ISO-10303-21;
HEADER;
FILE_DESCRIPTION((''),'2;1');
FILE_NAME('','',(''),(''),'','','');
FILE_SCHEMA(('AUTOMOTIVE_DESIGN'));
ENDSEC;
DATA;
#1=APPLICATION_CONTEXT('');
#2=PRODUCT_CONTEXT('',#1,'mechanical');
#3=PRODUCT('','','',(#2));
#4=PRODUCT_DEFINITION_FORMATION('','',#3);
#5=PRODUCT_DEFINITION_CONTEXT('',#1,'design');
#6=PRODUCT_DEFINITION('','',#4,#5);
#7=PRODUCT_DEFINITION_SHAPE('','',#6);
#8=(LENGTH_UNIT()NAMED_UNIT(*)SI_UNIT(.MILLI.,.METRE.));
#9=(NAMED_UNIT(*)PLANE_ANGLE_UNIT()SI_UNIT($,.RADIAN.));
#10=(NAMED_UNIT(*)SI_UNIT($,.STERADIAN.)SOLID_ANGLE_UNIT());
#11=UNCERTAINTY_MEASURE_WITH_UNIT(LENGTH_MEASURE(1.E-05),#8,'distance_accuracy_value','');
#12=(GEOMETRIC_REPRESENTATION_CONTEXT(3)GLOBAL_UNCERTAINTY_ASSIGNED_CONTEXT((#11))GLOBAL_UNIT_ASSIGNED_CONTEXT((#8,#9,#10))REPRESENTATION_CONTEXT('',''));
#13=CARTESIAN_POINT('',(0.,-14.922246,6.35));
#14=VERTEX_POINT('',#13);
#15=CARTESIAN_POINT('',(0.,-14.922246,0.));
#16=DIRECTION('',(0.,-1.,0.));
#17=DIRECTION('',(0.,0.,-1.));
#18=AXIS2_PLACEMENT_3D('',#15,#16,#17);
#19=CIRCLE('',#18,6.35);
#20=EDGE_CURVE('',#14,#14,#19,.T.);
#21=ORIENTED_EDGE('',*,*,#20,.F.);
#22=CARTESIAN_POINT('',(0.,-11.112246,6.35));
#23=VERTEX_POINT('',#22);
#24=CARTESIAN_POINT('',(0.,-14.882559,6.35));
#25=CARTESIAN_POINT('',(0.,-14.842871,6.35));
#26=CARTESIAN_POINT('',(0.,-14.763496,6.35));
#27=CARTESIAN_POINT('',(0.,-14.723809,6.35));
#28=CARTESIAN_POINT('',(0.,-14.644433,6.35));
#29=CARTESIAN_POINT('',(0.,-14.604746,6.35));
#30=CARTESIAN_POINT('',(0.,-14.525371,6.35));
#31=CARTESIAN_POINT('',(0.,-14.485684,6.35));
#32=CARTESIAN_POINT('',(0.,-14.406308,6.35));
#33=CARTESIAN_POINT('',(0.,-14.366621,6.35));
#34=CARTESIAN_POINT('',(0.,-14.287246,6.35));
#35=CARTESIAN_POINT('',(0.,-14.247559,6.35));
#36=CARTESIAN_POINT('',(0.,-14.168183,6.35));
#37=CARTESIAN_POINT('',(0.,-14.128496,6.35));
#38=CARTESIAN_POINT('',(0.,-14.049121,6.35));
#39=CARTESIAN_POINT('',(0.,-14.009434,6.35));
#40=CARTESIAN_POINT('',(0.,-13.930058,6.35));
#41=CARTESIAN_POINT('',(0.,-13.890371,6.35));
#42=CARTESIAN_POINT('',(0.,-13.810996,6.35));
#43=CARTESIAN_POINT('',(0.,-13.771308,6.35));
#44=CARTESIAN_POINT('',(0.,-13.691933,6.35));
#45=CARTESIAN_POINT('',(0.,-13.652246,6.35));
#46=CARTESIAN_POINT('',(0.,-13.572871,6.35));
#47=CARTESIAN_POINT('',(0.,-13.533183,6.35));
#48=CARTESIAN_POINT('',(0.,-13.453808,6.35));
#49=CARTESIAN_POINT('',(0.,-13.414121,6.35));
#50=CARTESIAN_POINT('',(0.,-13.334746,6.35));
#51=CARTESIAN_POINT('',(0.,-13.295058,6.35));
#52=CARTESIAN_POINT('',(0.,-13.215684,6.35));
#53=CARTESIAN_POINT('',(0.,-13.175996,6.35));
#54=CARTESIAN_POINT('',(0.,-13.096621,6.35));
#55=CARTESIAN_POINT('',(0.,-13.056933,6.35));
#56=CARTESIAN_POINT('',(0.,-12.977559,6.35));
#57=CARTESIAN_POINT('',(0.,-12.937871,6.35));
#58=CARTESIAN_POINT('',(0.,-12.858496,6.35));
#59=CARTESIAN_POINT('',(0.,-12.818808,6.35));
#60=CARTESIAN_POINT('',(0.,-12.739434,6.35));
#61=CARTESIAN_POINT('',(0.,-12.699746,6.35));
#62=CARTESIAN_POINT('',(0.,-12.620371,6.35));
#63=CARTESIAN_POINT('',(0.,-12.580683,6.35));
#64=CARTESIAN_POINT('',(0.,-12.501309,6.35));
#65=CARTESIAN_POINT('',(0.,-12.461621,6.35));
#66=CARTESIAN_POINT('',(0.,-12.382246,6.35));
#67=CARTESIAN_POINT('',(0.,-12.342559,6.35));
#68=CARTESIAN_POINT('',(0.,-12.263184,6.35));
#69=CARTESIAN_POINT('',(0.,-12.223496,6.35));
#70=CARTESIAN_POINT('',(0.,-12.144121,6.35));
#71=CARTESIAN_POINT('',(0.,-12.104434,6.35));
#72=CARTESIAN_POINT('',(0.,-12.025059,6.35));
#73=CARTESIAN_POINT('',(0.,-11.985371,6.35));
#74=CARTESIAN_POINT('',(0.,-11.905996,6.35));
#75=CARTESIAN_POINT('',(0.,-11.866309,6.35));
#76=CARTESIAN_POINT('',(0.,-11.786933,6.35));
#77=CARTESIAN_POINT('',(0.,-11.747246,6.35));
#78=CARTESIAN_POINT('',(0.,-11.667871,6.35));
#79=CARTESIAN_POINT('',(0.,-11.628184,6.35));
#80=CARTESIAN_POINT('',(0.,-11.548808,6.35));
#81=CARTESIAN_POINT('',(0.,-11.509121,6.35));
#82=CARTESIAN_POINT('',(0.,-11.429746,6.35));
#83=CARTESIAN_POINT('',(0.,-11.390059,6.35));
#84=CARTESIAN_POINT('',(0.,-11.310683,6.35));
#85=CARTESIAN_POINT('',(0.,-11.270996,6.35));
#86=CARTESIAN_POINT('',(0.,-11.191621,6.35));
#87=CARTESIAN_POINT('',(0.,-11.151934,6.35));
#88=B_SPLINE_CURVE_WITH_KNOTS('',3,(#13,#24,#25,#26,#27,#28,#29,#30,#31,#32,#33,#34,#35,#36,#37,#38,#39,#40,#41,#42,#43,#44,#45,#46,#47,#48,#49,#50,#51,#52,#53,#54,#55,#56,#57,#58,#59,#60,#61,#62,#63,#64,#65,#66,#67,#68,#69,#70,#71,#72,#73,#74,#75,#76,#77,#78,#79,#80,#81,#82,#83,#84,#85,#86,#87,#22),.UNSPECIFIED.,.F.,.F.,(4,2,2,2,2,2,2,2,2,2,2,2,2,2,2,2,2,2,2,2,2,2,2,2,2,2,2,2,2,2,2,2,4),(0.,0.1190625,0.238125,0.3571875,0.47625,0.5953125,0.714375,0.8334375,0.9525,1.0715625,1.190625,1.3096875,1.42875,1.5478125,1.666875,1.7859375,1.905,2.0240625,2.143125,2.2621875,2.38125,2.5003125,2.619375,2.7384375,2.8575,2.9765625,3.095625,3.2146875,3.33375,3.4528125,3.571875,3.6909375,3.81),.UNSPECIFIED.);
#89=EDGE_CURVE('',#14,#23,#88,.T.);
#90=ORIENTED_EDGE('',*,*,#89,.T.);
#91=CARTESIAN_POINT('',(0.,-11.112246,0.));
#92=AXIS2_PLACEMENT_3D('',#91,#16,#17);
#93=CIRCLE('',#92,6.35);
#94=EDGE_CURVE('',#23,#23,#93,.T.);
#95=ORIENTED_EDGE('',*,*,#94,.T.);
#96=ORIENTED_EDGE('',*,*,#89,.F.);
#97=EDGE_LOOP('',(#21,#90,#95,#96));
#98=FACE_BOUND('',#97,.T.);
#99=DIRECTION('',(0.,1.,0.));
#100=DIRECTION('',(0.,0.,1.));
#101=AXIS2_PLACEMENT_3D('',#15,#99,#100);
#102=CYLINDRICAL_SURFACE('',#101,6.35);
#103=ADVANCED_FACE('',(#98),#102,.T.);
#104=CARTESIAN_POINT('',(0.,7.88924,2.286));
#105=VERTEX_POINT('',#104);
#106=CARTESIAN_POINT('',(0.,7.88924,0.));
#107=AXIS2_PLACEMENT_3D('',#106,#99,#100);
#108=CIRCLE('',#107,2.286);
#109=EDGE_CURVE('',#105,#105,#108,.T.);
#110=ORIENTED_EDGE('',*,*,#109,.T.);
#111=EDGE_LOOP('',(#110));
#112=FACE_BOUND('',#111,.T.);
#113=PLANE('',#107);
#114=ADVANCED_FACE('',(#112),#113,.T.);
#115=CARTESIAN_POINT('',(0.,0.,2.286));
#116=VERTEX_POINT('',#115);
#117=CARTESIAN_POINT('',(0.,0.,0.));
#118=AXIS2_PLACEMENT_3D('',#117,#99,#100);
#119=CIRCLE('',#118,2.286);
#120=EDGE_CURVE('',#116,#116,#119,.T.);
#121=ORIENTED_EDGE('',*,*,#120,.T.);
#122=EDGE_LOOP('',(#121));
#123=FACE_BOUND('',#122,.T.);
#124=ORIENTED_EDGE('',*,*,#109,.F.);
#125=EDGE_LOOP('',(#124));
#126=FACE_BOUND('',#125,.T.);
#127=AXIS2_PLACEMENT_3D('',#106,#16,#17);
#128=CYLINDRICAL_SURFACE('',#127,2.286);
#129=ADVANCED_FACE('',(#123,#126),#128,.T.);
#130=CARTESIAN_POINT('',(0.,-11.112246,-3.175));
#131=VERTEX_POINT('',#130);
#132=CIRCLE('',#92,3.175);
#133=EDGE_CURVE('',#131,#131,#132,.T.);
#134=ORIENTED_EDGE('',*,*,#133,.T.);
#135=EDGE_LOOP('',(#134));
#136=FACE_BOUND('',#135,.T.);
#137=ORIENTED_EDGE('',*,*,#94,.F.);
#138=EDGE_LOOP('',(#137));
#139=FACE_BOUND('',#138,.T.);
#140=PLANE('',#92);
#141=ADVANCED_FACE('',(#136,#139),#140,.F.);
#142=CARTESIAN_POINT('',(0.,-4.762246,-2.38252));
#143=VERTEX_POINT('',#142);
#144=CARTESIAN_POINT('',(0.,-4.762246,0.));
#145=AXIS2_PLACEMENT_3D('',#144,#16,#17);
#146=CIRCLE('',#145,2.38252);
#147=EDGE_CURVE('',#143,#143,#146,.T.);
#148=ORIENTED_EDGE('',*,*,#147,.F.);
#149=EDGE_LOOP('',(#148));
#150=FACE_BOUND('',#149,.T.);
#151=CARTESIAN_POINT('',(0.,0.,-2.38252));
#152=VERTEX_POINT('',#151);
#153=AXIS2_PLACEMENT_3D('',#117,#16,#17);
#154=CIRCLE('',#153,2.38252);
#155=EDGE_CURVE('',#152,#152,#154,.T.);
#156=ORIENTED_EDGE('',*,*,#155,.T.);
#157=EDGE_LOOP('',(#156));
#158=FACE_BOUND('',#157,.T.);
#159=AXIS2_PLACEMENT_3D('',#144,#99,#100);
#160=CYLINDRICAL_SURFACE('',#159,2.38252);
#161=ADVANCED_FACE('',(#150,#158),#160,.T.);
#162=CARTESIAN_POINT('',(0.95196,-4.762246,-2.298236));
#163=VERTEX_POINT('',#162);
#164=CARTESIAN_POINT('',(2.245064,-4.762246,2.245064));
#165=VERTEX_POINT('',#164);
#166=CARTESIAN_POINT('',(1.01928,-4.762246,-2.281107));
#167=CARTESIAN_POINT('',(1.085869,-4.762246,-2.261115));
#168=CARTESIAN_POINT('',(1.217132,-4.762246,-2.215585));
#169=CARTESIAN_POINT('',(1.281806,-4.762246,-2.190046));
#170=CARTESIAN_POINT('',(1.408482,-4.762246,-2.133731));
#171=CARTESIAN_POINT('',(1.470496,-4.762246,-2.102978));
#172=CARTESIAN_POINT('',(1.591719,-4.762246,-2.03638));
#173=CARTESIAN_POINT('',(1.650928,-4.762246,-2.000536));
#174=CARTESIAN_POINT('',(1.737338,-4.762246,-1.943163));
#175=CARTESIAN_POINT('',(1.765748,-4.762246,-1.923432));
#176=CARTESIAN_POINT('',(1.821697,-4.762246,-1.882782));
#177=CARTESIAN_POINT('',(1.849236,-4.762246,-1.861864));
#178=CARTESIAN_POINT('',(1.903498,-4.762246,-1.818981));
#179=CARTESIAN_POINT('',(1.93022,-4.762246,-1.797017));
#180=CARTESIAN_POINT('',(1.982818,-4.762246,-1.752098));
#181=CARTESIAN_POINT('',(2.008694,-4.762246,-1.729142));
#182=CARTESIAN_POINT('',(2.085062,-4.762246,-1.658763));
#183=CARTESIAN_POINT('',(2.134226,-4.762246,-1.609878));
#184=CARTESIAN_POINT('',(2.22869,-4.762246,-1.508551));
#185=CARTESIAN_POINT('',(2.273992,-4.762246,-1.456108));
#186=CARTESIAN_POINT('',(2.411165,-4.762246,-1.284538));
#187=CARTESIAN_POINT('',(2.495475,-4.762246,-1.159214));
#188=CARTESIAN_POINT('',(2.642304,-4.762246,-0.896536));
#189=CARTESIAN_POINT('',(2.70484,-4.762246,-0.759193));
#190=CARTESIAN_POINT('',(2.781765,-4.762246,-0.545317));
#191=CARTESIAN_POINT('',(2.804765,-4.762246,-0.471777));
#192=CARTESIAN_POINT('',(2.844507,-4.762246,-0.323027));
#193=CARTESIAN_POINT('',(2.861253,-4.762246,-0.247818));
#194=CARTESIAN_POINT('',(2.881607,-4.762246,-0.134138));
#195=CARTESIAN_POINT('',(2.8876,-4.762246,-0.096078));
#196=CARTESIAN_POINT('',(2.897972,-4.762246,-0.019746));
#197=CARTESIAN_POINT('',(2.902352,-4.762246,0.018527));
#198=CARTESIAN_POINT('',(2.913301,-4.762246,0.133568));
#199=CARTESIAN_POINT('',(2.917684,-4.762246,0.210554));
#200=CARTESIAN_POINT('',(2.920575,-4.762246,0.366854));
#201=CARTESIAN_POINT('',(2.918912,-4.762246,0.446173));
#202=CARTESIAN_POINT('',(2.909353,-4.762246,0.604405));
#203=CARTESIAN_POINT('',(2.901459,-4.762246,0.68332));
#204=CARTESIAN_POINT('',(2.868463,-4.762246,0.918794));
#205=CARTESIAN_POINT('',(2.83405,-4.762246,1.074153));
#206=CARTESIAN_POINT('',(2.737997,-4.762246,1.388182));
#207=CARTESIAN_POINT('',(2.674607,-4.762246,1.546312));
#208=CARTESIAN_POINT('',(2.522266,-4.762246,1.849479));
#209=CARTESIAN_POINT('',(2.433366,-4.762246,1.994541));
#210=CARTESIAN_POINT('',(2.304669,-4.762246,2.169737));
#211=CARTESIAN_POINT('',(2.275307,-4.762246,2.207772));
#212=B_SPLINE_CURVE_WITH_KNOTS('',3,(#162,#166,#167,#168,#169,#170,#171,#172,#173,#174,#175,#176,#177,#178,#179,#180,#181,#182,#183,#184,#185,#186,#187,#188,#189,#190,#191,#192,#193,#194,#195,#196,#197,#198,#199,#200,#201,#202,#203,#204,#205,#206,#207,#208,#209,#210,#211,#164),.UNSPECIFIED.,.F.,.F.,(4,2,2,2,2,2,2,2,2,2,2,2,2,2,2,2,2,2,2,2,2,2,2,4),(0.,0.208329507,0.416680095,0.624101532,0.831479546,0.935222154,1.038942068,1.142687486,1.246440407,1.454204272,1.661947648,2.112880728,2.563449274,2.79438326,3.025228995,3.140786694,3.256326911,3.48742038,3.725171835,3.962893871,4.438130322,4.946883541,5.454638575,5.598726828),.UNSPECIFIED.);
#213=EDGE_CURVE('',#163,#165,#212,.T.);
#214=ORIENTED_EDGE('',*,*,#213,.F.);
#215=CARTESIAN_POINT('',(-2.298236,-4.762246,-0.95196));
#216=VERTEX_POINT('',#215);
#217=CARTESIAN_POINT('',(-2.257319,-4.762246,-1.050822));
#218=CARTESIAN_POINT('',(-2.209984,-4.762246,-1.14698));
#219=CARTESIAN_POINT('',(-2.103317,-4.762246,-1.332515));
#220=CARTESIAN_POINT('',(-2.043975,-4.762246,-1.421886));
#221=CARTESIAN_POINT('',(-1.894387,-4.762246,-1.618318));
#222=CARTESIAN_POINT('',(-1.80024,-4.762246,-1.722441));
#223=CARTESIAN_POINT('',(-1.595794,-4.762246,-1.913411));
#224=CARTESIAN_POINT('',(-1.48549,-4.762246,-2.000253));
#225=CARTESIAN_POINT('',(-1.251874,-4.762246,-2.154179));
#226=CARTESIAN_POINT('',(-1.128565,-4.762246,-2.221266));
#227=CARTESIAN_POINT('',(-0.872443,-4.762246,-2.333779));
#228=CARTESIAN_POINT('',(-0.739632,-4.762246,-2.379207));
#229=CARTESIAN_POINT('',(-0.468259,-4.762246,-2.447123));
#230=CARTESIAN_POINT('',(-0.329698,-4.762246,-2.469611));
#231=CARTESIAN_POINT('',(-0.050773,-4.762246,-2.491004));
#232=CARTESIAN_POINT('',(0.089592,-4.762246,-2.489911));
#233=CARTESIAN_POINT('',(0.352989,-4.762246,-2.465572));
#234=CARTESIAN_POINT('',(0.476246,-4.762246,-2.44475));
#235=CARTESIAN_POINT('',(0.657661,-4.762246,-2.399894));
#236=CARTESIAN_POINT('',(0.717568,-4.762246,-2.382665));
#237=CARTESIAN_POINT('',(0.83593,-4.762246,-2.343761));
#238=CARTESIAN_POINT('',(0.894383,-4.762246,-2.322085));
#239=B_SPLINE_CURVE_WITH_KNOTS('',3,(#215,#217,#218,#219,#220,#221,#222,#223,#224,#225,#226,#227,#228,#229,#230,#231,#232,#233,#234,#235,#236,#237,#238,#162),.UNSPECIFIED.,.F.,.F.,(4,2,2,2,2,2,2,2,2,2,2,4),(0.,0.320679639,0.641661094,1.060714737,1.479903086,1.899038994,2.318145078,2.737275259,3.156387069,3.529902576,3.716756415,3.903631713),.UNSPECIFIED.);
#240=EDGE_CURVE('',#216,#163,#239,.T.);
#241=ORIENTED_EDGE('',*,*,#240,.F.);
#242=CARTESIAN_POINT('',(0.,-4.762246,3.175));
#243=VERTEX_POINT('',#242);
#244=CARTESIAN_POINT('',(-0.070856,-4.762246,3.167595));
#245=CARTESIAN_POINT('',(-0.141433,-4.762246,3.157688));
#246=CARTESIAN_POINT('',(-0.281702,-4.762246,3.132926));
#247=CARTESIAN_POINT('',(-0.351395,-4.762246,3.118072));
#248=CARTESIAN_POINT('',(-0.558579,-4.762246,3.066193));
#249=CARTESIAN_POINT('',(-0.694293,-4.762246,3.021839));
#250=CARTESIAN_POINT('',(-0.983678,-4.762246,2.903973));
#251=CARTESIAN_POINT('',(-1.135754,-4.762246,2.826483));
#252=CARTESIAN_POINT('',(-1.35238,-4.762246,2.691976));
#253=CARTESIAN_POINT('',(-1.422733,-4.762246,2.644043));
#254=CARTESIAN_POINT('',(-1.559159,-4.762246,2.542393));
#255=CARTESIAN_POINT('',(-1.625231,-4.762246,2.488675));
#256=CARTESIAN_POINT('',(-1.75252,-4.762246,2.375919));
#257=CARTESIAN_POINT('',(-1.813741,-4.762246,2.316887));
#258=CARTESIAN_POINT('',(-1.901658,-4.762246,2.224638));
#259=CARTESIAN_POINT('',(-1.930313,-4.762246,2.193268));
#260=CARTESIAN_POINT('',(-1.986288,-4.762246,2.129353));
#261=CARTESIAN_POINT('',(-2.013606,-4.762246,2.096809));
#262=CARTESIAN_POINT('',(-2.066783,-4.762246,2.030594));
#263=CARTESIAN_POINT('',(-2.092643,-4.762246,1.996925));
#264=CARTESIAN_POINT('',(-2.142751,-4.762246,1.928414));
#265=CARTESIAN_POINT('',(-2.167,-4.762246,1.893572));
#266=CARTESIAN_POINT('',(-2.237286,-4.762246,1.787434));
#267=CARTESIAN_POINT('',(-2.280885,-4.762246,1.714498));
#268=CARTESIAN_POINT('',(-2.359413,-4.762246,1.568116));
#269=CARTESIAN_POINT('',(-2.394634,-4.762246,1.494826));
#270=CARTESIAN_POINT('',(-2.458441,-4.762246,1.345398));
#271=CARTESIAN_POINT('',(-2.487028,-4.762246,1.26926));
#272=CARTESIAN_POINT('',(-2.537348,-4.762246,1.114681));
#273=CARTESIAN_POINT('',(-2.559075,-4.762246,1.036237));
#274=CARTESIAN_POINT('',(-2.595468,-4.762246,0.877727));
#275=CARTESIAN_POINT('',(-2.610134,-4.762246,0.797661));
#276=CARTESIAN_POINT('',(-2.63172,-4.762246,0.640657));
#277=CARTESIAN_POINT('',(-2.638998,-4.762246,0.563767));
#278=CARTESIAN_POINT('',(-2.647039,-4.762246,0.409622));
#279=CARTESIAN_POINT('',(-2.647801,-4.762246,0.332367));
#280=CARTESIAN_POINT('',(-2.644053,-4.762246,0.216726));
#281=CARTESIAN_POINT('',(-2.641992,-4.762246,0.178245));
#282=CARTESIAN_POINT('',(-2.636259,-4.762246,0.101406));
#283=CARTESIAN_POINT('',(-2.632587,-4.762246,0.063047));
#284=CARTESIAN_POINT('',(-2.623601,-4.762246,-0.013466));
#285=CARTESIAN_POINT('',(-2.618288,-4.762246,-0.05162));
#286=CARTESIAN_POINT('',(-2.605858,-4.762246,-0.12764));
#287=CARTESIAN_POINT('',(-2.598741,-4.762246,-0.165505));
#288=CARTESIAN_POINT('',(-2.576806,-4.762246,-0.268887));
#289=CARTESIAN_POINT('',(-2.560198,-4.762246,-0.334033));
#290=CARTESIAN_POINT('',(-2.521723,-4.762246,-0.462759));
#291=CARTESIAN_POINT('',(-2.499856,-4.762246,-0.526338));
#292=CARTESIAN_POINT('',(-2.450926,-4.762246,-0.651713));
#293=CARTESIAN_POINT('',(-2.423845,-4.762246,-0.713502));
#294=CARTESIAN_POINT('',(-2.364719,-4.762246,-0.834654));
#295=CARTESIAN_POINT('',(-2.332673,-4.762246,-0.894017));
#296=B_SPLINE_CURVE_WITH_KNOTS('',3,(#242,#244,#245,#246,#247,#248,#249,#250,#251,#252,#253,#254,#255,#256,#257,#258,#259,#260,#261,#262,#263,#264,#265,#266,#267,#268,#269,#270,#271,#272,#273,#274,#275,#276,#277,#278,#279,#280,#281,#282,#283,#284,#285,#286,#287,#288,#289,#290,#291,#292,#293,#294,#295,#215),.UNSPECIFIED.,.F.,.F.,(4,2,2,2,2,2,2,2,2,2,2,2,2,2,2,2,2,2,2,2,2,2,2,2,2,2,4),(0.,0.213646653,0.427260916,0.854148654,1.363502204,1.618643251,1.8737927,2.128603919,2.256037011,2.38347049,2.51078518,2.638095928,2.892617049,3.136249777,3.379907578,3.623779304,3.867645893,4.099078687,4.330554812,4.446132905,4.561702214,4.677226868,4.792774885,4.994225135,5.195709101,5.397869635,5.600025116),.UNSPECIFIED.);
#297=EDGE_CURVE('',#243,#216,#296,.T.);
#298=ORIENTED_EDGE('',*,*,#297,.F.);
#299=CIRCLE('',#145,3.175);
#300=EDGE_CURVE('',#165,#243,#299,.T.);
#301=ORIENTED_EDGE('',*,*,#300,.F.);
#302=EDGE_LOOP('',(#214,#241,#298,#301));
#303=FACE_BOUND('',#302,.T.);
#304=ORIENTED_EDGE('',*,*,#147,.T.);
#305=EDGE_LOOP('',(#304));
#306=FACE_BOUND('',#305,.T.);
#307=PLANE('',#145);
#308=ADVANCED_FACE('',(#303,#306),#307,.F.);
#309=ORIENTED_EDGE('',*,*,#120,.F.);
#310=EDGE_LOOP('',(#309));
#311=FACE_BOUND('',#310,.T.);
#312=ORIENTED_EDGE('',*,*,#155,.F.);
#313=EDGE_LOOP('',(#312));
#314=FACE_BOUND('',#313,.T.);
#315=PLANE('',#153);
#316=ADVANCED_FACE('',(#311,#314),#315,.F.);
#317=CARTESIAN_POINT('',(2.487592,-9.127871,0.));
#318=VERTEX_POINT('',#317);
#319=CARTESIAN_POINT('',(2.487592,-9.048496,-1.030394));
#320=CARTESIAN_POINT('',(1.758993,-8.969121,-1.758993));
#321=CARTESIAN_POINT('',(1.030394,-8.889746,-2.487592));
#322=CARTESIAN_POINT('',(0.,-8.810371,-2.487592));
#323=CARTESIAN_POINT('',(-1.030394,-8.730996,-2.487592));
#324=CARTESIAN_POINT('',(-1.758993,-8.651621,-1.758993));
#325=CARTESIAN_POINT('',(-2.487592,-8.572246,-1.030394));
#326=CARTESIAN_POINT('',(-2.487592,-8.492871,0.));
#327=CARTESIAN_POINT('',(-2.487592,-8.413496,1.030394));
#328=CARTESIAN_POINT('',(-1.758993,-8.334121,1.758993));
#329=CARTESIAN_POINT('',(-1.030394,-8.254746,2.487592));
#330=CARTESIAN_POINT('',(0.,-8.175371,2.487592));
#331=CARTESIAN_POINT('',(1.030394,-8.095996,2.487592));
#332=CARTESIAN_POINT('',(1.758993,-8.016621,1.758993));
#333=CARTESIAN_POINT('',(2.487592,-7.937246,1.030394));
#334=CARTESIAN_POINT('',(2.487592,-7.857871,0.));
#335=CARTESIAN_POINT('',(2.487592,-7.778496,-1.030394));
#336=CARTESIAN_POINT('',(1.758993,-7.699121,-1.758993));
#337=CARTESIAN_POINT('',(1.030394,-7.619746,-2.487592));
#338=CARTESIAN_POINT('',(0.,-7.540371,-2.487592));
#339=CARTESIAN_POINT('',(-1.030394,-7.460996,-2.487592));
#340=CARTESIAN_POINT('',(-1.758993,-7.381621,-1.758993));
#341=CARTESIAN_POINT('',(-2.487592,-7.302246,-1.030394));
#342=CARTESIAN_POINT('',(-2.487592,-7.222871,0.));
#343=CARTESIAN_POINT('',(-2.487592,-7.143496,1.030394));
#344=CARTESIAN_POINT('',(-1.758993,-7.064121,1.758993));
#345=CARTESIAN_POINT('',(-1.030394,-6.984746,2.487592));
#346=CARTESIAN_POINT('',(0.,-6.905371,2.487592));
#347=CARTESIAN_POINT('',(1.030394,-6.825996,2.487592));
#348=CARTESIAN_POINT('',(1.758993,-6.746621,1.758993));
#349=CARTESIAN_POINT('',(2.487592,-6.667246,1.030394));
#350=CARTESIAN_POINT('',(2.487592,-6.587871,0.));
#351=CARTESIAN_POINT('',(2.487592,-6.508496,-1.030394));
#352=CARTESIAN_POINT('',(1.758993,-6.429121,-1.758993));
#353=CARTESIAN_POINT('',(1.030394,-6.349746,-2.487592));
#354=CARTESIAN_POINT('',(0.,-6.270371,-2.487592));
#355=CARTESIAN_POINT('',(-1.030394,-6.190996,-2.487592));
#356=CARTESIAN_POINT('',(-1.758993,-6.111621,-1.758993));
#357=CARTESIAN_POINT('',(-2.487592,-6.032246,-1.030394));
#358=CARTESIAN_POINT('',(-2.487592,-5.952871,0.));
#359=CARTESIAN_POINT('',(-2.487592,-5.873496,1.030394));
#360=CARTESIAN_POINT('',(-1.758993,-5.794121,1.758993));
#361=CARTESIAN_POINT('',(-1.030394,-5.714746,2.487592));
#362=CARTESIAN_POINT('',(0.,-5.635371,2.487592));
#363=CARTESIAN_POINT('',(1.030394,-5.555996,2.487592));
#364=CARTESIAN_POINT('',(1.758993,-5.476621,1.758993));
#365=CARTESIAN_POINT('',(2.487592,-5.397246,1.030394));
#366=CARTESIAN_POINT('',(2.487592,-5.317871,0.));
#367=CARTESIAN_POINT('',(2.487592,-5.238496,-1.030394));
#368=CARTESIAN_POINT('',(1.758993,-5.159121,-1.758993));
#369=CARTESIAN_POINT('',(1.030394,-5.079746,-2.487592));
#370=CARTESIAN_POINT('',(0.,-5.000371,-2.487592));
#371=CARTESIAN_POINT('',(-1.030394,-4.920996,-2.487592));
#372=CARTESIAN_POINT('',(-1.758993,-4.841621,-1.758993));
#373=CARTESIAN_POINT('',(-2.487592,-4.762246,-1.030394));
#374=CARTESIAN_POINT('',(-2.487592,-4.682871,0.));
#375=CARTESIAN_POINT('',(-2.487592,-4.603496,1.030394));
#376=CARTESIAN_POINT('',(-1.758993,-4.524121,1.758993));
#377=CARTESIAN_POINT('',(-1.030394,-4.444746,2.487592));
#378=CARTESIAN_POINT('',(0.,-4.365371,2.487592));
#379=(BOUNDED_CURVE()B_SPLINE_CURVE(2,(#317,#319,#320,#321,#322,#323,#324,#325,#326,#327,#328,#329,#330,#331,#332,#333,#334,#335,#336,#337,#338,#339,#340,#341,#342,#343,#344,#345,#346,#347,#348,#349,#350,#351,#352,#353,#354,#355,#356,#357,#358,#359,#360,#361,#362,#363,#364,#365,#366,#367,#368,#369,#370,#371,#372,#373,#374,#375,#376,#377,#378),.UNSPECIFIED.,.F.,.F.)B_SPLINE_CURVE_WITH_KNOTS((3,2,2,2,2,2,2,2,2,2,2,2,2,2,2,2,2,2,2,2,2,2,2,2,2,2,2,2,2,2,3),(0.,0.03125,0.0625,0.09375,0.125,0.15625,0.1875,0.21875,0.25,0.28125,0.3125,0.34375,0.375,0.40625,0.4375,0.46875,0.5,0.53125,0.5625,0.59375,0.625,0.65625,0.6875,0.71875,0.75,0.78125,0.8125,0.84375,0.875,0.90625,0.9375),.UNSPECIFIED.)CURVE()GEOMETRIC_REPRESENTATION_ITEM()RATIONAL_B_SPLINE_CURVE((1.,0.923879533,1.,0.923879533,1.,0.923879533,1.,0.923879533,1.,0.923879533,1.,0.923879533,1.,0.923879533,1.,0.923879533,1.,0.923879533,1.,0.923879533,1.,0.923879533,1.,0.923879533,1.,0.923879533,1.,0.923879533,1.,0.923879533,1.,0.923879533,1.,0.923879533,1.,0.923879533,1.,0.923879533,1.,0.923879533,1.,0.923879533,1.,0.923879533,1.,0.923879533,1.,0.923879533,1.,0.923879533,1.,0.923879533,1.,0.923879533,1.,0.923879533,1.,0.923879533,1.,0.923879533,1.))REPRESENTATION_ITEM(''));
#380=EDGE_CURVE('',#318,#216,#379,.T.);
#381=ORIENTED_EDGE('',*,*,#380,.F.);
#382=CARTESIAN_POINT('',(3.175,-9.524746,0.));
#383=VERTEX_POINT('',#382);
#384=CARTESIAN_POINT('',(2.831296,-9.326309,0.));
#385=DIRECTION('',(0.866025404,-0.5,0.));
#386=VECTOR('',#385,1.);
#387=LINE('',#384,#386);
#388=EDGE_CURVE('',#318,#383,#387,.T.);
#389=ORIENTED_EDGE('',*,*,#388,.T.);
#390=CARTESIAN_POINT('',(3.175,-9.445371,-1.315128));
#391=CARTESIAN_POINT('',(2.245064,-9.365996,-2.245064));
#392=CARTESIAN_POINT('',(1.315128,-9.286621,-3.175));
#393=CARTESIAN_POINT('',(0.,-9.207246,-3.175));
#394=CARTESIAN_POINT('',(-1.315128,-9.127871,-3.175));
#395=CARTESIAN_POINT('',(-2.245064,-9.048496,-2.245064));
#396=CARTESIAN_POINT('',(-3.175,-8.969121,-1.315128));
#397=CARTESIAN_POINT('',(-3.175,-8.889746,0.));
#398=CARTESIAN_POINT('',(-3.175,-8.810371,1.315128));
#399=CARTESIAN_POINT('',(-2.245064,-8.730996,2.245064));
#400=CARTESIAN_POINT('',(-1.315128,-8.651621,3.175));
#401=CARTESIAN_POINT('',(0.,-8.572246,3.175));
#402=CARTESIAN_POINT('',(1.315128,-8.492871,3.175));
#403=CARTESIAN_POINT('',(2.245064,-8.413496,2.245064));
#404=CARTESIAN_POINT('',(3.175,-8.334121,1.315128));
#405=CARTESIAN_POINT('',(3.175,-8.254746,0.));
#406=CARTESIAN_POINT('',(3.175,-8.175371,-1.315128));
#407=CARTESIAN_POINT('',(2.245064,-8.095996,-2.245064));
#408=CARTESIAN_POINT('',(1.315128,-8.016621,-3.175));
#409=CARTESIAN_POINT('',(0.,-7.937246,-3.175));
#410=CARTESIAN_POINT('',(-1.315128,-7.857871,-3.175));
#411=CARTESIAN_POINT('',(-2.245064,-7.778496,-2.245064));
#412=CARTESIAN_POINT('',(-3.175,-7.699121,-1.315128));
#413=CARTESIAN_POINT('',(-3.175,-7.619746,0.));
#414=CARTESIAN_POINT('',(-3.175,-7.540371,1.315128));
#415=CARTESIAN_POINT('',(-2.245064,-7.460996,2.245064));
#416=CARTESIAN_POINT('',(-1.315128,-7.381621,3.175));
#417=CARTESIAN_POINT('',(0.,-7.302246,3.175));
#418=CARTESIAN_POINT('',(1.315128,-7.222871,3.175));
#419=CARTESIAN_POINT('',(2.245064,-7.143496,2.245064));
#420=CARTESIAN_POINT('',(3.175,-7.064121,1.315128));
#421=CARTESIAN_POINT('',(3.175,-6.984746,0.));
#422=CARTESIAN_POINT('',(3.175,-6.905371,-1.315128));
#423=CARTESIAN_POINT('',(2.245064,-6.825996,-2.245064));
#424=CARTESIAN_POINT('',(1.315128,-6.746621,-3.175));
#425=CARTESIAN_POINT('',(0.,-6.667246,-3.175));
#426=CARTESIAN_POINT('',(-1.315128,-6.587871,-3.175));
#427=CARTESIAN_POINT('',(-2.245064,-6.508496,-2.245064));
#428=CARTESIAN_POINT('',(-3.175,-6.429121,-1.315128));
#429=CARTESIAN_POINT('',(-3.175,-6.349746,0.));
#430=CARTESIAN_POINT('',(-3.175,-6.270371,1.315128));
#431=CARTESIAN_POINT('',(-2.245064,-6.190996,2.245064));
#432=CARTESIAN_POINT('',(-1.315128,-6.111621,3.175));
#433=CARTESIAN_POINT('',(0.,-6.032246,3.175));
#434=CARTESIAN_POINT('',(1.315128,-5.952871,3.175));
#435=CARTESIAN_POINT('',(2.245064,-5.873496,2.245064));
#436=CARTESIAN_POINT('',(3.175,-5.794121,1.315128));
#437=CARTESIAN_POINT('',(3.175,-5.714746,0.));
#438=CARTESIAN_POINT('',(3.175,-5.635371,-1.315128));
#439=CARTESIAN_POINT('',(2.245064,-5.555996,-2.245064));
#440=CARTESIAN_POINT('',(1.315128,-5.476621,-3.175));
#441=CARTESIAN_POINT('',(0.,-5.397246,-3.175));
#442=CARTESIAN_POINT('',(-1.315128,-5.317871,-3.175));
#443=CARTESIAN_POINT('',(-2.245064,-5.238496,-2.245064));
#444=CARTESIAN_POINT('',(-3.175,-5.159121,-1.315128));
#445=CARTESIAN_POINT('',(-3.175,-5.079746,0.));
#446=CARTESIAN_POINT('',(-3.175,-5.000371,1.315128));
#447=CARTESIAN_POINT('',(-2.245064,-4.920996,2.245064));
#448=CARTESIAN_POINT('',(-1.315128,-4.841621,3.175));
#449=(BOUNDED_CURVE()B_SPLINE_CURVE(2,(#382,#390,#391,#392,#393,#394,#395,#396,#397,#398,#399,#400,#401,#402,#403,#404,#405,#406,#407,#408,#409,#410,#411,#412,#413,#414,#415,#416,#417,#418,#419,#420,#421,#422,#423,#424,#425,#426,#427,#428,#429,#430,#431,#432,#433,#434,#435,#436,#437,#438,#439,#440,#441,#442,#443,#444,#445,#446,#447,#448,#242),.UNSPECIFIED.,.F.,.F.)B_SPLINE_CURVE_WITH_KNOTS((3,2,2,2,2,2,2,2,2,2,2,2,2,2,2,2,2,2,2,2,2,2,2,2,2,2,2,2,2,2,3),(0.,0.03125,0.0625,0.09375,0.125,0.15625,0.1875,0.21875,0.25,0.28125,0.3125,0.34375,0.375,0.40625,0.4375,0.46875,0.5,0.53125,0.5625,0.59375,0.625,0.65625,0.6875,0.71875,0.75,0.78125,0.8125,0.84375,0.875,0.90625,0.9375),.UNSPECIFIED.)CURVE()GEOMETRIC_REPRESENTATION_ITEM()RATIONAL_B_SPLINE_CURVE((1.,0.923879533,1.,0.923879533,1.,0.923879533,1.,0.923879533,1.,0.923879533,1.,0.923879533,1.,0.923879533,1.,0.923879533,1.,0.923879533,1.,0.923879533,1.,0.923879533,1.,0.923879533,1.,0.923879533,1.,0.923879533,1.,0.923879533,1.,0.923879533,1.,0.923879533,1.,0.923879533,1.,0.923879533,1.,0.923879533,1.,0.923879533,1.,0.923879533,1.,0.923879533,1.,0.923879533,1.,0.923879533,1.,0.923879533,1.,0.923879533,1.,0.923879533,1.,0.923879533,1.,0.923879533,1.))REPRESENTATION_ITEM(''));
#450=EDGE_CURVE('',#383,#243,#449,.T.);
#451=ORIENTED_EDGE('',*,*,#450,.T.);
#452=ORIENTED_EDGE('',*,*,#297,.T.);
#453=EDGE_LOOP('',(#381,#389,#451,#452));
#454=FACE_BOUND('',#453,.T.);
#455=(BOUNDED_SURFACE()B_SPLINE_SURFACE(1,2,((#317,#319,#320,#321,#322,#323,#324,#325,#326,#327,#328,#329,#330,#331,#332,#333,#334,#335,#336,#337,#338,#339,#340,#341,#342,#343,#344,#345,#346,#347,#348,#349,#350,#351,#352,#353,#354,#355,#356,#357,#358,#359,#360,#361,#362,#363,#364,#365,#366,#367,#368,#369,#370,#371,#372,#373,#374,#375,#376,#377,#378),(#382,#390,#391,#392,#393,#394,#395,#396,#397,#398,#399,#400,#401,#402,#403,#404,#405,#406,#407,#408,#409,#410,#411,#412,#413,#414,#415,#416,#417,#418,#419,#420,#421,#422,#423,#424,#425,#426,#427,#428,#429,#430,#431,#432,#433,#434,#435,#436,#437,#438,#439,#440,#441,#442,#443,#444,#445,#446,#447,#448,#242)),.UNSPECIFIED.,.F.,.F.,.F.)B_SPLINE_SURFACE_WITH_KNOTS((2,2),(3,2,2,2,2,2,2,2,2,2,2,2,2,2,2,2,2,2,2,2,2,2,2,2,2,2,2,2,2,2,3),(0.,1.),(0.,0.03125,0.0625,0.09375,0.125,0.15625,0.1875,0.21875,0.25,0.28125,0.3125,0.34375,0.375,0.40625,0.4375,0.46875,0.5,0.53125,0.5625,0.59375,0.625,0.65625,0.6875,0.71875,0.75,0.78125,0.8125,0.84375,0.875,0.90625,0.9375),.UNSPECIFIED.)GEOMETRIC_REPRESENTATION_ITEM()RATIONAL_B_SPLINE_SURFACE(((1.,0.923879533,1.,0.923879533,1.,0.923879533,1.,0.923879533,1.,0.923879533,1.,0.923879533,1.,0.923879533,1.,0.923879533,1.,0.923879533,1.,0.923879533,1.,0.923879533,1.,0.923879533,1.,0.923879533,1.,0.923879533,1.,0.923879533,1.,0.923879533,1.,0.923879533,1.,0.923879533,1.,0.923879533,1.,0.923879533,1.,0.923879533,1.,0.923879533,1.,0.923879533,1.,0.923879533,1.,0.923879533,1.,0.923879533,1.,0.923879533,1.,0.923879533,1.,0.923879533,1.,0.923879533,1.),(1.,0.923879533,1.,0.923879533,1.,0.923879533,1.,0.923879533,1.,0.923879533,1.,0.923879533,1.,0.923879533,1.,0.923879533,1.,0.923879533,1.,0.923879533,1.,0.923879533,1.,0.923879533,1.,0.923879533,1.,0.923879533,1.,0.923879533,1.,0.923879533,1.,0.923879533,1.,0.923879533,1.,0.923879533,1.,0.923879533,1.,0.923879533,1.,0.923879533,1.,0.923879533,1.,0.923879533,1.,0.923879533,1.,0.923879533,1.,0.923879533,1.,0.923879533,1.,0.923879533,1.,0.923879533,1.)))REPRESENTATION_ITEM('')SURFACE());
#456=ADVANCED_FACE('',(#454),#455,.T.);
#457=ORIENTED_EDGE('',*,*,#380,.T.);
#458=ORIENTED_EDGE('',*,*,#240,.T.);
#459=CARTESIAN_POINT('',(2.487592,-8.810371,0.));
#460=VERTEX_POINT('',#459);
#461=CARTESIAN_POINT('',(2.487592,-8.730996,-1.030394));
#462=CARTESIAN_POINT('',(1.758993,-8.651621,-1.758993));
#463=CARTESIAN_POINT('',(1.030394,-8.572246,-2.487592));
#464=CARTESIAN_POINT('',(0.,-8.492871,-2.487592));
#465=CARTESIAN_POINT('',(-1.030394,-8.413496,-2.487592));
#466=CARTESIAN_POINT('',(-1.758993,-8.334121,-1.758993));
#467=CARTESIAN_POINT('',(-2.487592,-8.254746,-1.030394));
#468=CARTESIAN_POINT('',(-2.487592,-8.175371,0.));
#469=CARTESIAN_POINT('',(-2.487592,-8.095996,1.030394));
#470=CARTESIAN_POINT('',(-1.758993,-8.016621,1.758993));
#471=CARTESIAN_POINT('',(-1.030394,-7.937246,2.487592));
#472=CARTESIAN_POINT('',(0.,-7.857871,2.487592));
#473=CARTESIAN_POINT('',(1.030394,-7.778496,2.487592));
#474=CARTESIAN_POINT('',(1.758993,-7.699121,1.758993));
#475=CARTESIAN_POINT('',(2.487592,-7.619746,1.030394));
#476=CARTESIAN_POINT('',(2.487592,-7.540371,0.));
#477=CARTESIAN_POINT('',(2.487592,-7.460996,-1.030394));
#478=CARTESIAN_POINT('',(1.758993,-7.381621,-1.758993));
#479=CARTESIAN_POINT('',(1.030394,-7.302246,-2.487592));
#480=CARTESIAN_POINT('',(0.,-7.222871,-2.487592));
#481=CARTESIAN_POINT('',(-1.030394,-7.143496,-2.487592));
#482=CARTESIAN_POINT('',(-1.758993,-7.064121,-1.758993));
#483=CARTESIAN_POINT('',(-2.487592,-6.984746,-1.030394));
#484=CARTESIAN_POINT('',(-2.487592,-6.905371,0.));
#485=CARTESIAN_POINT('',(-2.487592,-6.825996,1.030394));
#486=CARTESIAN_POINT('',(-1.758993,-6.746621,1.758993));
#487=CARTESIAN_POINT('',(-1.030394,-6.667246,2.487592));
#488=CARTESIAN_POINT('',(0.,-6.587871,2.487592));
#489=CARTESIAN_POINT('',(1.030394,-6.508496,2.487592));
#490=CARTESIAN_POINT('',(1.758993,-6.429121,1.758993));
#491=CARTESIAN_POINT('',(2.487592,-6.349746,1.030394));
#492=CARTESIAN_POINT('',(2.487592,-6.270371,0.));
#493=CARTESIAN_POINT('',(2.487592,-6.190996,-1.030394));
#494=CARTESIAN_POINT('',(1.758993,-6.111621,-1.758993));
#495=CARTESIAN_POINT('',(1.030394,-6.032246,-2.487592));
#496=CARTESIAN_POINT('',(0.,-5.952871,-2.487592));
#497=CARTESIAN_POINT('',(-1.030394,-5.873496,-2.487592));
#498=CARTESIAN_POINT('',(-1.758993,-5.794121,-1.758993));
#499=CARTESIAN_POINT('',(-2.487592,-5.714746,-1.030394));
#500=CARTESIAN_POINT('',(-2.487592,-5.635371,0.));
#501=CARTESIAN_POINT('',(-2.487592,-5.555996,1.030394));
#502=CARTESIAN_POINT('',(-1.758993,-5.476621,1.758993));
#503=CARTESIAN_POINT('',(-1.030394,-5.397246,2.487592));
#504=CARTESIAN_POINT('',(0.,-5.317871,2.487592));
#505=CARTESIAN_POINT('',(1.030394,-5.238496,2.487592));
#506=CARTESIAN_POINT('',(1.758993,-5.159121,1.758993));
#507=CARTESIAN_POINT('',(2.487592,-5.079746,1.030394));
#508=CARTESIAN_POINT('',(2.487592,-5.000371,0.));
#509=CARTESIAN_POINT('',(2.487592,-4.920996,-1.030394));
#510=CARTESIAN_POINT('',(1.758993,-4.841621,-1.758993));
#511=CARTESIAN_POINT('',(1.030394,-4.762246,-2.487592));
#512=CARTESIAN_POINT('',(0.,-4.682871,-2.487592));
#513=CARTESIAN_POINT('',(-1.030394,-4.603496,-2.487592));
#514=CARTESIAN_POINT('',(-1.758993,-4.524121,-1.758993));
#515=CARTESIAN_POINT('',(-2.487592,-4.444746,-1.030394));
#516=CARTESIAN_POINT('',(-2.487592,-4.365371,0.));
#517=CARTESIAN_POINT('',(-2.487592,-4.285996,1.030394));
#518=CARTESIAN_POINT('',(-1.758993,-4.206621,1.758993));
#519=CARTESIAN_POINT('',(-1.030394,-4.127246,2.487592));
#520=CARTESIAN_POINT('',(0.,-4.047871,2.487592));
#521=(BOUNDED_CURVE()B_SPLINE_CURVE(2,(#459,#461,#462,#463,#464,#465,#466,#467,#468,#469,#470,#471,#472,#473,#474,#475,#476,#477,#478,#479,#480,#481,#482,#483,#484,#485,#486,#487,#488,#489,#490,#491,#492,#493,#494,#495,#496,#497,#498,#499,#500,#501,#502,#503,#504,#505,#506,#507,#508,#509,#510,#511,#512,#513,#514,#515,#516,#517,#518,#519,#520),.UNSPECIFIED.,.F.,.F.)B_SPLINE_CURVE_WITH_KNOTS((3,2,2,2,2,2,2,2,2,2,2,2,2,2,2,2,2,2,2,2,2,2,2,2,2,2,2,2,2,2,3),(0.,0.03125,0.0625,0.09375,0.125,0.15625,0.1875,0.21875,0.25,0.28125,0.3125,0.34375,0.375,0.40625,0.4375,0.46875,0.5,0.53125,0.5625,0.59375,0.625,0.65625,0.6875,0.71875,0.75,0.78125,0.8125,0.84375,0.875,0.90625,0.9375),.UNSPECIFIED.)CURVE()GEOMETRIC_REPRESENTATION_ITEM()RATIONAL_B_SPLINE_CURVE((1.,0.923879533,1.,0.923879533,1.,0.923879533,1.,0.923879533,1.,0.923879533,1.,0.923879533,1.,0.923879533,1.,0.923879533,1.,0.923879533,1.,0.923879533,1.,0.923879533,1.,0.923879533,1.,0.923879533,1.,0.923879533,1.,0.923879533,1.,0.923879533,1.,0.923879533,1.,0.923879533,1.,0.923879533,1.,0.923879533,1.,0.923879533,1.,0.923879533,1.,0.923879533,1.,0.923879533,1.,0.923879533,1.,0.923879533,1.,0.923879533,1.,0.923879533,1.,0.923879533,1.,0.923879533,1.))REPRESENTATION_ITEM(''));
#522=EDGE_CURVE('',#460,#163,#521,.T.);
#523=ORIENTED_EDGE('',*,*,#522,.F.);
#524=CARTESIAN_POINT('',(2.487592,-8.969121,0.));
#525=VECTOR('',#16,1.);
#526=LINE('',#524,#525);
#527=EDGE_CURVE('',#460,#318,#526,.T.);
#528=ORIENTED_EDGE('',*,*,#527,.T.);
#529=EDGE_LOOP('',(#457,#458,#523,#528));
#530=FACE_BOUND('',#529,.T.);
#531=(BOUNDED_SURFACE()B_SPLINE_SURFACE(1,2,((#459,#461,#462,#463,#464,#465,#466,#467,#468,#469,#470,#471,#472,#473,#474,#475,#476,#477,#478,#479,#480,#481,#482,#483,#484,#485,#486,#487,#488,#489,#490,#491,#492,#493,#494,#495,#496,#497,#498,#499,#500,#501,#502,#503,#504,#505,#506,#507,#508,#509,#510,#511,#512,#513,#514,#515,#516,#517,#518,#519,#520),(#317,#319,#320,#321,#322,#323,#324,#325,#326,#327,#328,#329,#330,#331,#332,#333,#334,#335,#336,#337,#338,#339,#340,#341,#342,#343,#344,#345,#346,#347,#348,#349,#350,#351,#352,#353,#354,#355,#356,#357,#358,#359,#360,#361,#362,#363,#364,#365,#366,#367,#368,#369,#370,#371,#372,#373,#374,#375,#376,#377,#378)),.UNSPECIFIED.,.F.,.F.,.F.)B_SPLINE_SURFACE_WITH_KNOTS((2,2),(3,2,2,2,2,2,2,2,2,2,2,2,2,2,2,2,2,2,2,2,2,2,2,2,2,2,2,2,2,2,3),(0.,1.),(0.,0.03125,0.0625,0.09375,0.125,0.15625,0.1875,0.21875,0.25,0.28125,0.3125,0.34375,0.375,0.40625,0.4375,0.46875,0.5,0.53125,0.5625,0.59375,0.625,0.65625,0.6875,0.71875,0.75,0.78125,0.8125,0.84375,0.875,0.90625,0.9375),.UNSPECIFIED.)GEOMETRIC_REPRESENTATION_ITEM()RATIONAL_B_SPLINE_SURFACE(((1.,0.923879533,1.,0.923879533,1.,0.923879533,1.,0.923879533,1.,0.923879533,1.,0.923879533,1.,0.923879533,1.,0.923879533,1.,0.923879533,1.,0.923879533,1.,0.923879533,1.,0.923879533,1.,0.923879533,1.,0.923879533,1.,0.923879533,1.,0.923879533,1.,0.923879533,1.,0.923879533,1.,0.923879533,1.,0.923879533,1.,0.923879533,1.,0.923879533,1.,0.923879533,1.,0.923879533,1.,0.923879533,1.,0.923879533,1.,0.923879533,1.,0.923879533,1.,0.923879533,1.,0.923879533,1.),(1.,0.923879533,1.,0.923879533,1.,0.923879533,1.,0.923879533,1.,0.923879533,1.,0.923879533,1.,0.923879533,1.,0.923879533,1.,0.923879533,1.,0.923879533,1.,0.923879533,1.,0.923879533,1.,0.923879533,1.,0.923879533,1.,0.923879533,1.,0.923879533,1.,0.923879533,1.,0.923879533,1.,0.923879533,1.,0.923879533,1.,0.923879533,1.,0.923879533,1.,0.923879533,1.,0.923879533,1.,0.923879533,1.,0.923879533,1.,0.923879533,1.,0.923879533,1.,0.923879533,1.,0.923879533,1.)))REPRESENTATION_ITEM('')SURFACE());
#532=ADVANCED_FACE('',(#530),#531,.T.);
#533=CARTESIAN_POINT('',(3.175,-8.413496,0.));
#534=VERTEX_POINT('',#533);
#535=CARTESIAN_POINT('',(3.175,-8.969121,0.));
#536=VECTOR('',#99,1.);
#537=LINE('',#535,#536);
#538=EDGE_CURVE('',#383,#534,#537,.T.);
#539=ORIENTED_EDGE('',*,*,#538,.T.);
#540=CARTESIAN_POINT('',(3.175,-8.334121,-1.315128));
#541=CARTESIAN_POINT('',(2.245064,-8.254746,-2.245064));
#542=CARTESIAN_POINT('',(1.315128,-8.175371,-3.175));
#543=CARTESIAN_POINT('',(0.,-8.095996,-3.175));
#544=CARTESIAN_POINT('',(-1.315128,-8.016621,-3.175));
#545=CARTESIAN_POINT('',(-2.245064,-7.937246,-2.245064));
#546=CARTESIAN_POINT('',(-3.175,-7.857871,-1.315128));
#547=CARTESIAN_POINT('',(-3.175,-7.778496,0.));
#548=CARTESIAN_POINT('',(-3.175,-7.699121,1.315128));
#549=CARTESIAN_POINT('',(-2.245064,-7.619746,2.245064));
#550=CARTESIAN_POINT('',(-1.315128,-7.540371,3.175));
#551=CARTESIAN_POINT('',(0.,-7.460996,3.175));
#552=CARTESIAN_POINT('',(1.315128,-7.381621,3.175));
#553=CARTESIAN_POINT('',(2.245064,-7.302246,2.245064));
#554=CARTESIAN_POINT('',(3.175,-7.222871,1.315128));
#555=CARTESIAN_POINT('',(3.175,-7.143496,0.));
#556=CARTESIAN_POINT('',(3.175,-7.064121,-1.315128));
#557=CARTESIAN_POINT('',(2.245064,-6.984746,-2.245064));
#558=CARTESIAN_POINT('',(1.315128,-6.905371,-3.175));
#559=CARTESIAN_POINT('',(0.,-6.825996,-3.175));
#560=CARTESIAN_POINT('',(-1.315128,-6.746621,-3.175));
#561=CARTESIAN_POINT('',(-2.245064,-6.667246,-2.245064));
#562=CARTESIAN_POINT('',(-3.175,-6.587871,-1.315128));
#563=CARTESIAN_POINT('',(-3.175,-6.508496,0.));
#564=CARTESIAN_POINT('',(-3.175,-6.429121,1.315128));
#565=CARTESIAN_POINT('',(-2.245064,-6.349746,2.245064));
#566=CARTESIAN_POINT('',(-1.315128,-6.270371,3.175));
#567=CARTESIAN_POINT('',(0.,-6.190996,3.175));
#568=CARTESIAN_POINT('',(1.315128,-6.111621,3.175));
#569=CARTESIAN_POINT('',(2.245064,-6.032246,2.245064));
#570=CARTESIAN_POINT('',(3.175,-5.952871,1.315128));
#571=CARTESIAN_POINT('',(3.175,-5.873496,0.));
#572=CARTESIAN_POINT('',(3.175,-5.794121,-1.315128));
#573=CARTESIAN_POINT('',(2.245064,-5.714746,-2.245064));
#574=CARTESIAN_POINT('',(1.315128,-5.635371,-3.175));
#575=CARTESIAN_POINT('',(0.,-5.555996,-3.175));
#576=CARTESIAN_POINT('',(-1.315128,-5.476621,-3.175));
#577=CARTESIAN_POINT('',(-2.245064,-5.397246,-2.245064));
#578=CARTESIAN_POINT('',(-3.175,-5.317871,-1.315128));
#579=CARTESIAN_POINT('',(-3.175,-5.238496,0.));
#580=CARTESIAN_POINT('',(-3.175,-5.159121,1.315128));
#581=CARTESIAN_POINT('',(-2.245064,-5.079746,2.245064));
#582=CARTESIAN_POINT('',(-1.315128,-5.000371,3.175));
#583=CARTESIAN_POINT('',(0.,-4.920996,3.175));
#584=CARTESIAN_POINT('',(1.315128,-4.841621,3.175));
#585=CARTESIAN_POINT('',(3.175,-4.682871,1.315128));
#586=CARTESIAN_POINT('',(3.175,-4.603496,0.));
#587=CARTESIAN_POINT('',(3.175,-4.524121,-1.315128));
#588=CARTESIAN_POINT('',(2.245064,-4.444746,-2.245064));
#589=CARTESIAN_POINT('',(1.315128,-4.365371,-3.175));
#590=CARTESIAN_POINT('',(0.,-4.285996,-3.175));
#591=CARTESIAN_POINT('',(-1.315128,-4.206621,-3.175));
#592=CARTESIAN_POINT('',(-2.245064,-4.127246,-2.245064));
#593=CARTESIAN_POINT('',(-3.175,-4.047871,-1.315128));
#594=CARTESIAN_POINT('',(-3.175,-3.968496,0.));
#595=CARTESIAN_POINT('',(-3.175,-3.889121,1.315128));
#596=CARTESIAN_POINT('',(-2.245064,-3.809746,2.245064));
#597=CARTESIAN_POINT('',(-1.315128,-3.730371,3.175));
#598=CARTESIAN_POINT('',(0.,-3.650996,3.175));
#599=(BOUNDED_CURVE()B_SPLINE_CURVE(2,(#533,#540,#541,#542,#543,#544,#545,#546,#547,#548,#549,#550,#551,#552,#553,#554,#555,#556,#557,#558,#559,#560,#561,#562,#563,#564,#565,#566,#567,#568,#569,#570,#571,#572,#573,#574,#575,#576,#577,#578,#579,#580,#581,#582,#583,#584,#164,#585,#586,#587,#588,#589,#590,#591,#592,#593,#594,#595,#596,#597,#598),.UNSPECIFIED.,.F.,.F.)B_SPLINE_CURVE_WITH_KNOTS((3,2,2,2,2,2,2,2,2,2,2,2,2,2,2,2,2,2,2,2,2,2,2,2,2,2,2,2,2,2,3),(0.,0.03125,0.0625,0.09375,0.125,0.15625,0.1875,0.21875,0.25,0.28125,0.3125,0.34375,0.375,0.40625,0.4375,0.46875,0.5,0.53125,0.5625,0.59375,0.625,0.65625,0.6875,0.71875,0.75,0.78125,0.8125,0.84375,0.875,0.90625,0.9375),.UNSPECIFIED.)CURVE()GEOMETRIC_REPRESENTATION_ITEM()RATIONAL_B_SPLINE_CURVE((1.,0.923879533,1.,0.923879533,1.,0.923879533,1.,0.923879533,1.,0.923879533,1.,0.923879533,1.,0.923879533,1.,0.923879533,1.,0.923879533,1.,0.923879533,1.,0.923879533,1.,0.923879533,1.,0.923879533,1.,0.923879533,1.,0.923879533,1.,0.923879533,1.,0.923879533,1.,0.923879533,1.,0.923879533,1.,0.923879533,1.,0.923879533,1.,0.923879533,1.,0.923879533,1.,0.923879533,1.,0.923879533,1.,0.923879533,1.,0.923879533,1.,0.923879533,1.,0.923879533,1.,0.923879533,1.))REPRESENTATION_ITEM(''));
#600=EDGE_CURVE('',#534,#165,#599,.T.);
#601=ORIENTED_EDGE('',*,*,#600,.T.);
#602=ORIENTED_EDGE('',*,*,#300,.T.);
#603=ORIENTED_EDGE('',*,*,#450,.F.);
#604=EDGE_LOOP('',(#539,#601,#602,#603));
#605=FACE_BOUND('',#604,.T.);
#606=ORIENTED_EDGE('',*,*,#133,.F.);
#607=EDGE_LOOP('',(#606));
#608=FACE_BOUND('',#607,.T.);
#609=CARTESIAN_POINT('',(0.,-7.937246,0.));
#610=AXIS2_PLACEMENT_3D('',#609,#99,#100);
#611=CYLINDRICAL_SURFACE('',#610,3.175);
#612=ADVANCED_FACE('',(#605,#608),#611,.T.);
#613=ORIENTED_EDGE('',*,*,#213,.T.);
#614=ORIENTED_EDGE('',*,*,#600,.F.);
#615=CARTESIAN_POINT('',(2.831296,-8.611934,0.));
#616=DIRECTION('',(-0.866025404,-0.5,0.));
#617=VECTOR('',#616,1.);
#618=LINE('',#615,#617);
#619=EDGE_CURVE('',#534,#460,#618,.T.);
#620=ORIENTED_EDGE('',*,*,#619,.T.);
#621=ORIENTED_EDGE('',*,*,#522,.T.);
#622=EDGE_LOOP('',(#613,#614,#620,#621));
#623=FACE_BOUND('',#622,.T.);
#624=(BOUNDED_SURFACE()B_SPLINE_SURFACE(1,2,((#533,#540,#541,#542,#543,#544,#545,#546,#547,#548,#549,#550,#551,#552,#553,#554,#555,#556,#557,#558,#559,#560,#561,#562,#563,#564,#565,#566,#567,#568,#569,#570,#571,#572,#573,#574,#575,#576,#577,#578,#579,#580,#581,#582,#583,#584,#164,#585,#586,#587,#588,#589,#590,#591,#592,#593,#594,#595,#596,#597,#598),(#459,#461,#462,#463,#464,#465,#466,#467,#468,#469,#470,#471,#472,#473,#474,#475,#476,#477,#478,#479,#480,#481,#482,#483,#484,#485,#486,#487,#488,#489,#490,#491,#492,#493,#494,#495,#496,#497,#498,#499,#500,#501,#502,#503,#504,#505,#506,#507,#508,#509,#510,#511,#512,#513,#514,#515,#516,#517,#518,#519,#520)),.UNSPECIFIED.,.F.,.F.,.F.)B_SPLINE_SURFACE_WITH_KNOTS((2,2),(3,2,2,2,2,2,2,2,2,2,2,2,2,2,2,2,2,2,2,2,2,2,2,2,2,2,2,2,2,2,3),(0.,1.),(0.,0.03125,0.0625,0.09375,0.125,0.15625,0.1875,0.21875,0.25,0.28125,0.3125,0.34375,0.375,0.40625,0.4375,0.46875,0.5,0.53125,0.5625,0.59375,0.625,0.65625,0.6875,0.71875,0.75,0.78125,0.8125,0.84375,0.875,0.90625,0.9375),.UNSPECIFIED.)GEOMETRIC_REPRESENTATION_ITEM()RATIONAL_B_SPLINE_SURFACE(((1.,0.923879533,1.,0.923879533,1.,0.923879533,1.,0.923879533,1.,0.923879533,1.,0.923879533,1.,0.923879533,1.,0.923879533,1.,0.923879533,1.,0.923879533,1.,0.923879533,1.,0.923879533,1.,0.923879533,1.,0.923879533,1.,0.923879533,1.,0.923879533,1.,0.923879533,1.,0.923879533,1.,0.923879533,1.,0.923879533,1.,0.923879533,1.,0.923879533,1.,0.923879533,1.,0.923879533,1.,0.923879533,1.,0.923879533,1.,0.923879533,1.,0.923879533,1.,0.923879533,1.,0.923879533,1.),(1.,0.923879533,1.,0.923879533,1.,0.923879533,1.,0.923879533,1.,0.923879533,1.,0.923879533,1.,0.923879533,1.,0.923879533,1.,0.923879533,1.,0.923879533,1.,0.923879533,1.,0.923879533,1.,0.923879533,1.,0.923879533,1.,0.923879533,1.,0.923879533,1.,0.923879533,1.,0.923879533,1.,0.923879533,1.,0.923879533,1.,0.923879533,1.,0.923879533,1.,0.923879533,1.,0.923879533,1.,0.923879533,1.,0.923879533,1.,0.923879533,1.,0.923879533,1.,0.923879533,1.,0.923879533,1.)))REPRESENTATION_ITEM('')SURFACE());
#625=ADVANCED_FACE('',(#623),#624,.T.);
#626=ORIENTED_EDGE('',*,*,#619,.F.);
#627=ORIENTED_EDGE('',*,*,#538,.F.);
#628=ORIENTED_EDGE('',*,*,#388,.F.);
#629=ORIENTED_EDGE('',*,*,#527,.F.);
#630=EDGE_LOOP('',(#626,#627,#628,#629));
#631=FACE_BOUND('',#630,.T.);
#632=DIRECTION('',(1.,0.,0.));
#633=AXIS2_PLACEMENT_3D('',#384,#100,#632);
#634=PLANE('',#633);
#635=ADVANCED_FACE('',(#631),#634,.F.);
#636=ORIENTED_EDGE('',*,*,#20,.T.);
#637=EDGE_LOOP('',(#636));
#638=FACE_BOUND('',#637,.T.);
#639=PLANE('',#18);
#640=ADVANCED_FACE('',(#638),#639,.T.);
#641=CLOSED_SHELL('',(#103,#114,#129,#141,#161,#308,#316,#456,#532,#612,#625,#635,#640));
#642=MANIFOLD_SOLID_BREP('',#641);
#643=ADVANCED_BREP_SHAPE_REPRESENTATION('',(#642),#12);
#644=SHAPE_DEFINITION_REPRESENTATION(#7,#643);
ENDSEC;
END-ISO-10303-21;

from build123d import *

# Parameters (mm, degrees)
SKETCH1_R           = 2.286
BOSS_EXTRUDE1_DEPTH = 7.88924
SKETCH2_R           = 2.38252
BOSS_EXTRUDE2_DEPTH = 4.762246
SKETCH3_R           = 3.175
BOSS_EXTRUDE3_DEPTH = 3.175
SKETCH4_R           = 3.175
BOSS_EXTRUDE4_DEPTH = 3.175
THREAD2_PITCH       = 1.27
SKETCH11_R          = 6.35
BOSS_EXTRUDE5_DEPTH = 3.81


with BuildPart() as part:
    # Sketch1 → Boss-Extrude1 (new body)
    with BuildSketch(Plane(origin=(0, 0, 0), x_dir=(1, 0, 0), z_dir=(0, 1, 0))):
        with Locations(Location((0, 0, 0), (0, 0, 270))):
            Circle(SKETCH1_R)
    extrude(amount=BOSS_EXTRUDE1_DEPTH)

    # Sketch2 → Boss-Extrude2 (add)
    with BuildSketch(Plane(origin=(0, 0, 0), x_dir=(-1, 0, 0), z_dir=(0, -1, 0))):
        with Locations(Location((0, 0, 0), (0, 0, 90))):
            Circle(SKETCH2_R)
    extrude(amount=BOSS_EXTRUDE2_DEPTH)

    # Sketch3 → Boss-Extrude3 (add)
    with BuildSketch(Plane(origin=(0, -4.762246, 0), x_dir=(-1, 0, 0), z_dir=(0, -1, 0))):
        with Locations(Location((0, 0, 0), (0, 0, 90))):
            Circle(SKETCH3_R)
    extrude(amount=BOSS_EXTRUDE3_DEPTH)

    # Sketch4 → Boss-Extrude4 (add)
    with BuildSketch(Plane(origin=(0, -7.937246, 0), x_dir=(-1, 0, 0), z_dir=(0, -1, 0))):
        with Locations(Location((0, 0, 0), (0, 0, 90))):
            Circle(SKETCH4_R)
    extrude(amount=BOSS_EXTRUDE4_DEPTH)

    # Thread2: the profile of Thread Profile3 profile screwed along a right-hand helix of 3.75 turns, 8 arcs to a turn; built about Z, then put on its axis
    thread2_z = Axis((0, 0, 0), (0, 0, 1))
    thread2_corners = [(3.1753, 0, -0.000173205), (3.1753, 0, 1.111423202), (2.487592339, 0, 0.714374998), (2.487592339, 0, 0.396874998)]
    with BuildLine(mode=Mode.PRIVATE) as thread2_profile:
        Line(thread2_corners[0], thread2_corners[1])
        Line(thread2_corners[1], thread2_corners[2])
        Line(thread2_corners[2], thread2_corners[3])
        Line(thread2_corners[3], thread2_corners[0])
    thread2_cap = Face(thread2_profile.wire())
    thread2_turn_angles = [0, 22.5, 45, 67.5, 90, 112.5, 135, 157.5, 180, 202.5, 225, 247.5, 270, 292.5, 315, 337.5, 360]
    thread2_turn_weights = [1, 0.9238795325112867, 1, 0.9238795325112867, 1, 0.9238795325112867, 1, 0.9238795325112867, 1, 0.9238795325112867, 1, 0.9238795325112867, 1, 0.9238795325112867, 1, 0.9238795325112867, 1]
    thread2_turn_rails = [Edge.make_bspline([Vector(p[0], p[1], 0).rotate(thread2_z, thread2_turn_angles[k]) / thread2_turn_weights[k] + Vector(0, 0, p[2] + THREAD2_PITCH * thread2_turn_angles[k] / 360) for k in range(17)], [0, 0, 0, 1, 1, 2, 2, 3, 3, 4, 4, 5, 5, 6, 6, 7, 7, 8, 8, 8], 2, thread2_turn_weights) for p in thread2_corners]
    thread2_turn_sides = [Face.make_surface_from_curves(thread2_turn_rails[p[0]], thread2_turn_rails[p[1]]) for p in [(0, 1), (1, 2), (2, 3), (3, 0)]]
    thread2_last_angles = [1080, 1102.5, 1125, 1147.5, 1170, 1192.5, 1215, 1237.5, 1260, 1282.5, 1305, 1327.5, 1350]
    thread2_last_weights = [1, 0.9238795325112867, 1, 0.9238795325112867, 1, 0.9238795325112867, 1, 0.9238795325112867, 1, 0.9238795325112867, 1, 0.9238795325112883, 1]
    thread2_last_rails = [Edge.make_bspline([Vector(p[0], p[1], 0).rotate(thread2_z, thread2_last_angles[k]) / thread2_last_weights[k] + Vector(0, 0, p[2] + THREAD2_PITCH * thread2_last_angles[k] / 360) for k in range(13)], [0, 0, 0, 1, 1, 2, 2, 3, 3, 4, 4, 5, 5, 6, 6, 6], 2, thread2_last_weights) for p in thread2_corners]
    thread2_last_sides = [Face.make_surface_from_curves(thread2_last_rails[p[0]], thread2_last_rails[p[1]]) for p in [(0, 1), (1, 2), (2, 3), (3, 0)]]
    thread2 = Plane(origin=(0, -9.524746, 0), x_dir=(1, 0, 0), z_dir=(0, 1, 0)) * Solid(Shell([*[p.moved(Location((0, 0, THREAD2_PITCH * i))) for i in range(3) for p in thread2_turn_sides], *thread2_last_sides, thread2_cap, thread2_cap.rotate(thread2_z, 1350).moved(Location((0, 0, THREAD2_PITCH * 1350 / 360)))]))
    add(thread2, mode=Mode.SUBTRACT)

    # Sketch11 → Boss-Extrude5 (add)
    with BuildSketch(Plane(origin=(0, -11.112246, 0), x_dir=(-1, 0, 0), z_dir=(0, -1, 0))):
        with Locations(Location((0, 0, 0), (0, 0, 270))):
            Circle(SKETCH11_R)
    extrude(amount=BOSS_EXTRUDE5_DEPTH)


solid = part.part
